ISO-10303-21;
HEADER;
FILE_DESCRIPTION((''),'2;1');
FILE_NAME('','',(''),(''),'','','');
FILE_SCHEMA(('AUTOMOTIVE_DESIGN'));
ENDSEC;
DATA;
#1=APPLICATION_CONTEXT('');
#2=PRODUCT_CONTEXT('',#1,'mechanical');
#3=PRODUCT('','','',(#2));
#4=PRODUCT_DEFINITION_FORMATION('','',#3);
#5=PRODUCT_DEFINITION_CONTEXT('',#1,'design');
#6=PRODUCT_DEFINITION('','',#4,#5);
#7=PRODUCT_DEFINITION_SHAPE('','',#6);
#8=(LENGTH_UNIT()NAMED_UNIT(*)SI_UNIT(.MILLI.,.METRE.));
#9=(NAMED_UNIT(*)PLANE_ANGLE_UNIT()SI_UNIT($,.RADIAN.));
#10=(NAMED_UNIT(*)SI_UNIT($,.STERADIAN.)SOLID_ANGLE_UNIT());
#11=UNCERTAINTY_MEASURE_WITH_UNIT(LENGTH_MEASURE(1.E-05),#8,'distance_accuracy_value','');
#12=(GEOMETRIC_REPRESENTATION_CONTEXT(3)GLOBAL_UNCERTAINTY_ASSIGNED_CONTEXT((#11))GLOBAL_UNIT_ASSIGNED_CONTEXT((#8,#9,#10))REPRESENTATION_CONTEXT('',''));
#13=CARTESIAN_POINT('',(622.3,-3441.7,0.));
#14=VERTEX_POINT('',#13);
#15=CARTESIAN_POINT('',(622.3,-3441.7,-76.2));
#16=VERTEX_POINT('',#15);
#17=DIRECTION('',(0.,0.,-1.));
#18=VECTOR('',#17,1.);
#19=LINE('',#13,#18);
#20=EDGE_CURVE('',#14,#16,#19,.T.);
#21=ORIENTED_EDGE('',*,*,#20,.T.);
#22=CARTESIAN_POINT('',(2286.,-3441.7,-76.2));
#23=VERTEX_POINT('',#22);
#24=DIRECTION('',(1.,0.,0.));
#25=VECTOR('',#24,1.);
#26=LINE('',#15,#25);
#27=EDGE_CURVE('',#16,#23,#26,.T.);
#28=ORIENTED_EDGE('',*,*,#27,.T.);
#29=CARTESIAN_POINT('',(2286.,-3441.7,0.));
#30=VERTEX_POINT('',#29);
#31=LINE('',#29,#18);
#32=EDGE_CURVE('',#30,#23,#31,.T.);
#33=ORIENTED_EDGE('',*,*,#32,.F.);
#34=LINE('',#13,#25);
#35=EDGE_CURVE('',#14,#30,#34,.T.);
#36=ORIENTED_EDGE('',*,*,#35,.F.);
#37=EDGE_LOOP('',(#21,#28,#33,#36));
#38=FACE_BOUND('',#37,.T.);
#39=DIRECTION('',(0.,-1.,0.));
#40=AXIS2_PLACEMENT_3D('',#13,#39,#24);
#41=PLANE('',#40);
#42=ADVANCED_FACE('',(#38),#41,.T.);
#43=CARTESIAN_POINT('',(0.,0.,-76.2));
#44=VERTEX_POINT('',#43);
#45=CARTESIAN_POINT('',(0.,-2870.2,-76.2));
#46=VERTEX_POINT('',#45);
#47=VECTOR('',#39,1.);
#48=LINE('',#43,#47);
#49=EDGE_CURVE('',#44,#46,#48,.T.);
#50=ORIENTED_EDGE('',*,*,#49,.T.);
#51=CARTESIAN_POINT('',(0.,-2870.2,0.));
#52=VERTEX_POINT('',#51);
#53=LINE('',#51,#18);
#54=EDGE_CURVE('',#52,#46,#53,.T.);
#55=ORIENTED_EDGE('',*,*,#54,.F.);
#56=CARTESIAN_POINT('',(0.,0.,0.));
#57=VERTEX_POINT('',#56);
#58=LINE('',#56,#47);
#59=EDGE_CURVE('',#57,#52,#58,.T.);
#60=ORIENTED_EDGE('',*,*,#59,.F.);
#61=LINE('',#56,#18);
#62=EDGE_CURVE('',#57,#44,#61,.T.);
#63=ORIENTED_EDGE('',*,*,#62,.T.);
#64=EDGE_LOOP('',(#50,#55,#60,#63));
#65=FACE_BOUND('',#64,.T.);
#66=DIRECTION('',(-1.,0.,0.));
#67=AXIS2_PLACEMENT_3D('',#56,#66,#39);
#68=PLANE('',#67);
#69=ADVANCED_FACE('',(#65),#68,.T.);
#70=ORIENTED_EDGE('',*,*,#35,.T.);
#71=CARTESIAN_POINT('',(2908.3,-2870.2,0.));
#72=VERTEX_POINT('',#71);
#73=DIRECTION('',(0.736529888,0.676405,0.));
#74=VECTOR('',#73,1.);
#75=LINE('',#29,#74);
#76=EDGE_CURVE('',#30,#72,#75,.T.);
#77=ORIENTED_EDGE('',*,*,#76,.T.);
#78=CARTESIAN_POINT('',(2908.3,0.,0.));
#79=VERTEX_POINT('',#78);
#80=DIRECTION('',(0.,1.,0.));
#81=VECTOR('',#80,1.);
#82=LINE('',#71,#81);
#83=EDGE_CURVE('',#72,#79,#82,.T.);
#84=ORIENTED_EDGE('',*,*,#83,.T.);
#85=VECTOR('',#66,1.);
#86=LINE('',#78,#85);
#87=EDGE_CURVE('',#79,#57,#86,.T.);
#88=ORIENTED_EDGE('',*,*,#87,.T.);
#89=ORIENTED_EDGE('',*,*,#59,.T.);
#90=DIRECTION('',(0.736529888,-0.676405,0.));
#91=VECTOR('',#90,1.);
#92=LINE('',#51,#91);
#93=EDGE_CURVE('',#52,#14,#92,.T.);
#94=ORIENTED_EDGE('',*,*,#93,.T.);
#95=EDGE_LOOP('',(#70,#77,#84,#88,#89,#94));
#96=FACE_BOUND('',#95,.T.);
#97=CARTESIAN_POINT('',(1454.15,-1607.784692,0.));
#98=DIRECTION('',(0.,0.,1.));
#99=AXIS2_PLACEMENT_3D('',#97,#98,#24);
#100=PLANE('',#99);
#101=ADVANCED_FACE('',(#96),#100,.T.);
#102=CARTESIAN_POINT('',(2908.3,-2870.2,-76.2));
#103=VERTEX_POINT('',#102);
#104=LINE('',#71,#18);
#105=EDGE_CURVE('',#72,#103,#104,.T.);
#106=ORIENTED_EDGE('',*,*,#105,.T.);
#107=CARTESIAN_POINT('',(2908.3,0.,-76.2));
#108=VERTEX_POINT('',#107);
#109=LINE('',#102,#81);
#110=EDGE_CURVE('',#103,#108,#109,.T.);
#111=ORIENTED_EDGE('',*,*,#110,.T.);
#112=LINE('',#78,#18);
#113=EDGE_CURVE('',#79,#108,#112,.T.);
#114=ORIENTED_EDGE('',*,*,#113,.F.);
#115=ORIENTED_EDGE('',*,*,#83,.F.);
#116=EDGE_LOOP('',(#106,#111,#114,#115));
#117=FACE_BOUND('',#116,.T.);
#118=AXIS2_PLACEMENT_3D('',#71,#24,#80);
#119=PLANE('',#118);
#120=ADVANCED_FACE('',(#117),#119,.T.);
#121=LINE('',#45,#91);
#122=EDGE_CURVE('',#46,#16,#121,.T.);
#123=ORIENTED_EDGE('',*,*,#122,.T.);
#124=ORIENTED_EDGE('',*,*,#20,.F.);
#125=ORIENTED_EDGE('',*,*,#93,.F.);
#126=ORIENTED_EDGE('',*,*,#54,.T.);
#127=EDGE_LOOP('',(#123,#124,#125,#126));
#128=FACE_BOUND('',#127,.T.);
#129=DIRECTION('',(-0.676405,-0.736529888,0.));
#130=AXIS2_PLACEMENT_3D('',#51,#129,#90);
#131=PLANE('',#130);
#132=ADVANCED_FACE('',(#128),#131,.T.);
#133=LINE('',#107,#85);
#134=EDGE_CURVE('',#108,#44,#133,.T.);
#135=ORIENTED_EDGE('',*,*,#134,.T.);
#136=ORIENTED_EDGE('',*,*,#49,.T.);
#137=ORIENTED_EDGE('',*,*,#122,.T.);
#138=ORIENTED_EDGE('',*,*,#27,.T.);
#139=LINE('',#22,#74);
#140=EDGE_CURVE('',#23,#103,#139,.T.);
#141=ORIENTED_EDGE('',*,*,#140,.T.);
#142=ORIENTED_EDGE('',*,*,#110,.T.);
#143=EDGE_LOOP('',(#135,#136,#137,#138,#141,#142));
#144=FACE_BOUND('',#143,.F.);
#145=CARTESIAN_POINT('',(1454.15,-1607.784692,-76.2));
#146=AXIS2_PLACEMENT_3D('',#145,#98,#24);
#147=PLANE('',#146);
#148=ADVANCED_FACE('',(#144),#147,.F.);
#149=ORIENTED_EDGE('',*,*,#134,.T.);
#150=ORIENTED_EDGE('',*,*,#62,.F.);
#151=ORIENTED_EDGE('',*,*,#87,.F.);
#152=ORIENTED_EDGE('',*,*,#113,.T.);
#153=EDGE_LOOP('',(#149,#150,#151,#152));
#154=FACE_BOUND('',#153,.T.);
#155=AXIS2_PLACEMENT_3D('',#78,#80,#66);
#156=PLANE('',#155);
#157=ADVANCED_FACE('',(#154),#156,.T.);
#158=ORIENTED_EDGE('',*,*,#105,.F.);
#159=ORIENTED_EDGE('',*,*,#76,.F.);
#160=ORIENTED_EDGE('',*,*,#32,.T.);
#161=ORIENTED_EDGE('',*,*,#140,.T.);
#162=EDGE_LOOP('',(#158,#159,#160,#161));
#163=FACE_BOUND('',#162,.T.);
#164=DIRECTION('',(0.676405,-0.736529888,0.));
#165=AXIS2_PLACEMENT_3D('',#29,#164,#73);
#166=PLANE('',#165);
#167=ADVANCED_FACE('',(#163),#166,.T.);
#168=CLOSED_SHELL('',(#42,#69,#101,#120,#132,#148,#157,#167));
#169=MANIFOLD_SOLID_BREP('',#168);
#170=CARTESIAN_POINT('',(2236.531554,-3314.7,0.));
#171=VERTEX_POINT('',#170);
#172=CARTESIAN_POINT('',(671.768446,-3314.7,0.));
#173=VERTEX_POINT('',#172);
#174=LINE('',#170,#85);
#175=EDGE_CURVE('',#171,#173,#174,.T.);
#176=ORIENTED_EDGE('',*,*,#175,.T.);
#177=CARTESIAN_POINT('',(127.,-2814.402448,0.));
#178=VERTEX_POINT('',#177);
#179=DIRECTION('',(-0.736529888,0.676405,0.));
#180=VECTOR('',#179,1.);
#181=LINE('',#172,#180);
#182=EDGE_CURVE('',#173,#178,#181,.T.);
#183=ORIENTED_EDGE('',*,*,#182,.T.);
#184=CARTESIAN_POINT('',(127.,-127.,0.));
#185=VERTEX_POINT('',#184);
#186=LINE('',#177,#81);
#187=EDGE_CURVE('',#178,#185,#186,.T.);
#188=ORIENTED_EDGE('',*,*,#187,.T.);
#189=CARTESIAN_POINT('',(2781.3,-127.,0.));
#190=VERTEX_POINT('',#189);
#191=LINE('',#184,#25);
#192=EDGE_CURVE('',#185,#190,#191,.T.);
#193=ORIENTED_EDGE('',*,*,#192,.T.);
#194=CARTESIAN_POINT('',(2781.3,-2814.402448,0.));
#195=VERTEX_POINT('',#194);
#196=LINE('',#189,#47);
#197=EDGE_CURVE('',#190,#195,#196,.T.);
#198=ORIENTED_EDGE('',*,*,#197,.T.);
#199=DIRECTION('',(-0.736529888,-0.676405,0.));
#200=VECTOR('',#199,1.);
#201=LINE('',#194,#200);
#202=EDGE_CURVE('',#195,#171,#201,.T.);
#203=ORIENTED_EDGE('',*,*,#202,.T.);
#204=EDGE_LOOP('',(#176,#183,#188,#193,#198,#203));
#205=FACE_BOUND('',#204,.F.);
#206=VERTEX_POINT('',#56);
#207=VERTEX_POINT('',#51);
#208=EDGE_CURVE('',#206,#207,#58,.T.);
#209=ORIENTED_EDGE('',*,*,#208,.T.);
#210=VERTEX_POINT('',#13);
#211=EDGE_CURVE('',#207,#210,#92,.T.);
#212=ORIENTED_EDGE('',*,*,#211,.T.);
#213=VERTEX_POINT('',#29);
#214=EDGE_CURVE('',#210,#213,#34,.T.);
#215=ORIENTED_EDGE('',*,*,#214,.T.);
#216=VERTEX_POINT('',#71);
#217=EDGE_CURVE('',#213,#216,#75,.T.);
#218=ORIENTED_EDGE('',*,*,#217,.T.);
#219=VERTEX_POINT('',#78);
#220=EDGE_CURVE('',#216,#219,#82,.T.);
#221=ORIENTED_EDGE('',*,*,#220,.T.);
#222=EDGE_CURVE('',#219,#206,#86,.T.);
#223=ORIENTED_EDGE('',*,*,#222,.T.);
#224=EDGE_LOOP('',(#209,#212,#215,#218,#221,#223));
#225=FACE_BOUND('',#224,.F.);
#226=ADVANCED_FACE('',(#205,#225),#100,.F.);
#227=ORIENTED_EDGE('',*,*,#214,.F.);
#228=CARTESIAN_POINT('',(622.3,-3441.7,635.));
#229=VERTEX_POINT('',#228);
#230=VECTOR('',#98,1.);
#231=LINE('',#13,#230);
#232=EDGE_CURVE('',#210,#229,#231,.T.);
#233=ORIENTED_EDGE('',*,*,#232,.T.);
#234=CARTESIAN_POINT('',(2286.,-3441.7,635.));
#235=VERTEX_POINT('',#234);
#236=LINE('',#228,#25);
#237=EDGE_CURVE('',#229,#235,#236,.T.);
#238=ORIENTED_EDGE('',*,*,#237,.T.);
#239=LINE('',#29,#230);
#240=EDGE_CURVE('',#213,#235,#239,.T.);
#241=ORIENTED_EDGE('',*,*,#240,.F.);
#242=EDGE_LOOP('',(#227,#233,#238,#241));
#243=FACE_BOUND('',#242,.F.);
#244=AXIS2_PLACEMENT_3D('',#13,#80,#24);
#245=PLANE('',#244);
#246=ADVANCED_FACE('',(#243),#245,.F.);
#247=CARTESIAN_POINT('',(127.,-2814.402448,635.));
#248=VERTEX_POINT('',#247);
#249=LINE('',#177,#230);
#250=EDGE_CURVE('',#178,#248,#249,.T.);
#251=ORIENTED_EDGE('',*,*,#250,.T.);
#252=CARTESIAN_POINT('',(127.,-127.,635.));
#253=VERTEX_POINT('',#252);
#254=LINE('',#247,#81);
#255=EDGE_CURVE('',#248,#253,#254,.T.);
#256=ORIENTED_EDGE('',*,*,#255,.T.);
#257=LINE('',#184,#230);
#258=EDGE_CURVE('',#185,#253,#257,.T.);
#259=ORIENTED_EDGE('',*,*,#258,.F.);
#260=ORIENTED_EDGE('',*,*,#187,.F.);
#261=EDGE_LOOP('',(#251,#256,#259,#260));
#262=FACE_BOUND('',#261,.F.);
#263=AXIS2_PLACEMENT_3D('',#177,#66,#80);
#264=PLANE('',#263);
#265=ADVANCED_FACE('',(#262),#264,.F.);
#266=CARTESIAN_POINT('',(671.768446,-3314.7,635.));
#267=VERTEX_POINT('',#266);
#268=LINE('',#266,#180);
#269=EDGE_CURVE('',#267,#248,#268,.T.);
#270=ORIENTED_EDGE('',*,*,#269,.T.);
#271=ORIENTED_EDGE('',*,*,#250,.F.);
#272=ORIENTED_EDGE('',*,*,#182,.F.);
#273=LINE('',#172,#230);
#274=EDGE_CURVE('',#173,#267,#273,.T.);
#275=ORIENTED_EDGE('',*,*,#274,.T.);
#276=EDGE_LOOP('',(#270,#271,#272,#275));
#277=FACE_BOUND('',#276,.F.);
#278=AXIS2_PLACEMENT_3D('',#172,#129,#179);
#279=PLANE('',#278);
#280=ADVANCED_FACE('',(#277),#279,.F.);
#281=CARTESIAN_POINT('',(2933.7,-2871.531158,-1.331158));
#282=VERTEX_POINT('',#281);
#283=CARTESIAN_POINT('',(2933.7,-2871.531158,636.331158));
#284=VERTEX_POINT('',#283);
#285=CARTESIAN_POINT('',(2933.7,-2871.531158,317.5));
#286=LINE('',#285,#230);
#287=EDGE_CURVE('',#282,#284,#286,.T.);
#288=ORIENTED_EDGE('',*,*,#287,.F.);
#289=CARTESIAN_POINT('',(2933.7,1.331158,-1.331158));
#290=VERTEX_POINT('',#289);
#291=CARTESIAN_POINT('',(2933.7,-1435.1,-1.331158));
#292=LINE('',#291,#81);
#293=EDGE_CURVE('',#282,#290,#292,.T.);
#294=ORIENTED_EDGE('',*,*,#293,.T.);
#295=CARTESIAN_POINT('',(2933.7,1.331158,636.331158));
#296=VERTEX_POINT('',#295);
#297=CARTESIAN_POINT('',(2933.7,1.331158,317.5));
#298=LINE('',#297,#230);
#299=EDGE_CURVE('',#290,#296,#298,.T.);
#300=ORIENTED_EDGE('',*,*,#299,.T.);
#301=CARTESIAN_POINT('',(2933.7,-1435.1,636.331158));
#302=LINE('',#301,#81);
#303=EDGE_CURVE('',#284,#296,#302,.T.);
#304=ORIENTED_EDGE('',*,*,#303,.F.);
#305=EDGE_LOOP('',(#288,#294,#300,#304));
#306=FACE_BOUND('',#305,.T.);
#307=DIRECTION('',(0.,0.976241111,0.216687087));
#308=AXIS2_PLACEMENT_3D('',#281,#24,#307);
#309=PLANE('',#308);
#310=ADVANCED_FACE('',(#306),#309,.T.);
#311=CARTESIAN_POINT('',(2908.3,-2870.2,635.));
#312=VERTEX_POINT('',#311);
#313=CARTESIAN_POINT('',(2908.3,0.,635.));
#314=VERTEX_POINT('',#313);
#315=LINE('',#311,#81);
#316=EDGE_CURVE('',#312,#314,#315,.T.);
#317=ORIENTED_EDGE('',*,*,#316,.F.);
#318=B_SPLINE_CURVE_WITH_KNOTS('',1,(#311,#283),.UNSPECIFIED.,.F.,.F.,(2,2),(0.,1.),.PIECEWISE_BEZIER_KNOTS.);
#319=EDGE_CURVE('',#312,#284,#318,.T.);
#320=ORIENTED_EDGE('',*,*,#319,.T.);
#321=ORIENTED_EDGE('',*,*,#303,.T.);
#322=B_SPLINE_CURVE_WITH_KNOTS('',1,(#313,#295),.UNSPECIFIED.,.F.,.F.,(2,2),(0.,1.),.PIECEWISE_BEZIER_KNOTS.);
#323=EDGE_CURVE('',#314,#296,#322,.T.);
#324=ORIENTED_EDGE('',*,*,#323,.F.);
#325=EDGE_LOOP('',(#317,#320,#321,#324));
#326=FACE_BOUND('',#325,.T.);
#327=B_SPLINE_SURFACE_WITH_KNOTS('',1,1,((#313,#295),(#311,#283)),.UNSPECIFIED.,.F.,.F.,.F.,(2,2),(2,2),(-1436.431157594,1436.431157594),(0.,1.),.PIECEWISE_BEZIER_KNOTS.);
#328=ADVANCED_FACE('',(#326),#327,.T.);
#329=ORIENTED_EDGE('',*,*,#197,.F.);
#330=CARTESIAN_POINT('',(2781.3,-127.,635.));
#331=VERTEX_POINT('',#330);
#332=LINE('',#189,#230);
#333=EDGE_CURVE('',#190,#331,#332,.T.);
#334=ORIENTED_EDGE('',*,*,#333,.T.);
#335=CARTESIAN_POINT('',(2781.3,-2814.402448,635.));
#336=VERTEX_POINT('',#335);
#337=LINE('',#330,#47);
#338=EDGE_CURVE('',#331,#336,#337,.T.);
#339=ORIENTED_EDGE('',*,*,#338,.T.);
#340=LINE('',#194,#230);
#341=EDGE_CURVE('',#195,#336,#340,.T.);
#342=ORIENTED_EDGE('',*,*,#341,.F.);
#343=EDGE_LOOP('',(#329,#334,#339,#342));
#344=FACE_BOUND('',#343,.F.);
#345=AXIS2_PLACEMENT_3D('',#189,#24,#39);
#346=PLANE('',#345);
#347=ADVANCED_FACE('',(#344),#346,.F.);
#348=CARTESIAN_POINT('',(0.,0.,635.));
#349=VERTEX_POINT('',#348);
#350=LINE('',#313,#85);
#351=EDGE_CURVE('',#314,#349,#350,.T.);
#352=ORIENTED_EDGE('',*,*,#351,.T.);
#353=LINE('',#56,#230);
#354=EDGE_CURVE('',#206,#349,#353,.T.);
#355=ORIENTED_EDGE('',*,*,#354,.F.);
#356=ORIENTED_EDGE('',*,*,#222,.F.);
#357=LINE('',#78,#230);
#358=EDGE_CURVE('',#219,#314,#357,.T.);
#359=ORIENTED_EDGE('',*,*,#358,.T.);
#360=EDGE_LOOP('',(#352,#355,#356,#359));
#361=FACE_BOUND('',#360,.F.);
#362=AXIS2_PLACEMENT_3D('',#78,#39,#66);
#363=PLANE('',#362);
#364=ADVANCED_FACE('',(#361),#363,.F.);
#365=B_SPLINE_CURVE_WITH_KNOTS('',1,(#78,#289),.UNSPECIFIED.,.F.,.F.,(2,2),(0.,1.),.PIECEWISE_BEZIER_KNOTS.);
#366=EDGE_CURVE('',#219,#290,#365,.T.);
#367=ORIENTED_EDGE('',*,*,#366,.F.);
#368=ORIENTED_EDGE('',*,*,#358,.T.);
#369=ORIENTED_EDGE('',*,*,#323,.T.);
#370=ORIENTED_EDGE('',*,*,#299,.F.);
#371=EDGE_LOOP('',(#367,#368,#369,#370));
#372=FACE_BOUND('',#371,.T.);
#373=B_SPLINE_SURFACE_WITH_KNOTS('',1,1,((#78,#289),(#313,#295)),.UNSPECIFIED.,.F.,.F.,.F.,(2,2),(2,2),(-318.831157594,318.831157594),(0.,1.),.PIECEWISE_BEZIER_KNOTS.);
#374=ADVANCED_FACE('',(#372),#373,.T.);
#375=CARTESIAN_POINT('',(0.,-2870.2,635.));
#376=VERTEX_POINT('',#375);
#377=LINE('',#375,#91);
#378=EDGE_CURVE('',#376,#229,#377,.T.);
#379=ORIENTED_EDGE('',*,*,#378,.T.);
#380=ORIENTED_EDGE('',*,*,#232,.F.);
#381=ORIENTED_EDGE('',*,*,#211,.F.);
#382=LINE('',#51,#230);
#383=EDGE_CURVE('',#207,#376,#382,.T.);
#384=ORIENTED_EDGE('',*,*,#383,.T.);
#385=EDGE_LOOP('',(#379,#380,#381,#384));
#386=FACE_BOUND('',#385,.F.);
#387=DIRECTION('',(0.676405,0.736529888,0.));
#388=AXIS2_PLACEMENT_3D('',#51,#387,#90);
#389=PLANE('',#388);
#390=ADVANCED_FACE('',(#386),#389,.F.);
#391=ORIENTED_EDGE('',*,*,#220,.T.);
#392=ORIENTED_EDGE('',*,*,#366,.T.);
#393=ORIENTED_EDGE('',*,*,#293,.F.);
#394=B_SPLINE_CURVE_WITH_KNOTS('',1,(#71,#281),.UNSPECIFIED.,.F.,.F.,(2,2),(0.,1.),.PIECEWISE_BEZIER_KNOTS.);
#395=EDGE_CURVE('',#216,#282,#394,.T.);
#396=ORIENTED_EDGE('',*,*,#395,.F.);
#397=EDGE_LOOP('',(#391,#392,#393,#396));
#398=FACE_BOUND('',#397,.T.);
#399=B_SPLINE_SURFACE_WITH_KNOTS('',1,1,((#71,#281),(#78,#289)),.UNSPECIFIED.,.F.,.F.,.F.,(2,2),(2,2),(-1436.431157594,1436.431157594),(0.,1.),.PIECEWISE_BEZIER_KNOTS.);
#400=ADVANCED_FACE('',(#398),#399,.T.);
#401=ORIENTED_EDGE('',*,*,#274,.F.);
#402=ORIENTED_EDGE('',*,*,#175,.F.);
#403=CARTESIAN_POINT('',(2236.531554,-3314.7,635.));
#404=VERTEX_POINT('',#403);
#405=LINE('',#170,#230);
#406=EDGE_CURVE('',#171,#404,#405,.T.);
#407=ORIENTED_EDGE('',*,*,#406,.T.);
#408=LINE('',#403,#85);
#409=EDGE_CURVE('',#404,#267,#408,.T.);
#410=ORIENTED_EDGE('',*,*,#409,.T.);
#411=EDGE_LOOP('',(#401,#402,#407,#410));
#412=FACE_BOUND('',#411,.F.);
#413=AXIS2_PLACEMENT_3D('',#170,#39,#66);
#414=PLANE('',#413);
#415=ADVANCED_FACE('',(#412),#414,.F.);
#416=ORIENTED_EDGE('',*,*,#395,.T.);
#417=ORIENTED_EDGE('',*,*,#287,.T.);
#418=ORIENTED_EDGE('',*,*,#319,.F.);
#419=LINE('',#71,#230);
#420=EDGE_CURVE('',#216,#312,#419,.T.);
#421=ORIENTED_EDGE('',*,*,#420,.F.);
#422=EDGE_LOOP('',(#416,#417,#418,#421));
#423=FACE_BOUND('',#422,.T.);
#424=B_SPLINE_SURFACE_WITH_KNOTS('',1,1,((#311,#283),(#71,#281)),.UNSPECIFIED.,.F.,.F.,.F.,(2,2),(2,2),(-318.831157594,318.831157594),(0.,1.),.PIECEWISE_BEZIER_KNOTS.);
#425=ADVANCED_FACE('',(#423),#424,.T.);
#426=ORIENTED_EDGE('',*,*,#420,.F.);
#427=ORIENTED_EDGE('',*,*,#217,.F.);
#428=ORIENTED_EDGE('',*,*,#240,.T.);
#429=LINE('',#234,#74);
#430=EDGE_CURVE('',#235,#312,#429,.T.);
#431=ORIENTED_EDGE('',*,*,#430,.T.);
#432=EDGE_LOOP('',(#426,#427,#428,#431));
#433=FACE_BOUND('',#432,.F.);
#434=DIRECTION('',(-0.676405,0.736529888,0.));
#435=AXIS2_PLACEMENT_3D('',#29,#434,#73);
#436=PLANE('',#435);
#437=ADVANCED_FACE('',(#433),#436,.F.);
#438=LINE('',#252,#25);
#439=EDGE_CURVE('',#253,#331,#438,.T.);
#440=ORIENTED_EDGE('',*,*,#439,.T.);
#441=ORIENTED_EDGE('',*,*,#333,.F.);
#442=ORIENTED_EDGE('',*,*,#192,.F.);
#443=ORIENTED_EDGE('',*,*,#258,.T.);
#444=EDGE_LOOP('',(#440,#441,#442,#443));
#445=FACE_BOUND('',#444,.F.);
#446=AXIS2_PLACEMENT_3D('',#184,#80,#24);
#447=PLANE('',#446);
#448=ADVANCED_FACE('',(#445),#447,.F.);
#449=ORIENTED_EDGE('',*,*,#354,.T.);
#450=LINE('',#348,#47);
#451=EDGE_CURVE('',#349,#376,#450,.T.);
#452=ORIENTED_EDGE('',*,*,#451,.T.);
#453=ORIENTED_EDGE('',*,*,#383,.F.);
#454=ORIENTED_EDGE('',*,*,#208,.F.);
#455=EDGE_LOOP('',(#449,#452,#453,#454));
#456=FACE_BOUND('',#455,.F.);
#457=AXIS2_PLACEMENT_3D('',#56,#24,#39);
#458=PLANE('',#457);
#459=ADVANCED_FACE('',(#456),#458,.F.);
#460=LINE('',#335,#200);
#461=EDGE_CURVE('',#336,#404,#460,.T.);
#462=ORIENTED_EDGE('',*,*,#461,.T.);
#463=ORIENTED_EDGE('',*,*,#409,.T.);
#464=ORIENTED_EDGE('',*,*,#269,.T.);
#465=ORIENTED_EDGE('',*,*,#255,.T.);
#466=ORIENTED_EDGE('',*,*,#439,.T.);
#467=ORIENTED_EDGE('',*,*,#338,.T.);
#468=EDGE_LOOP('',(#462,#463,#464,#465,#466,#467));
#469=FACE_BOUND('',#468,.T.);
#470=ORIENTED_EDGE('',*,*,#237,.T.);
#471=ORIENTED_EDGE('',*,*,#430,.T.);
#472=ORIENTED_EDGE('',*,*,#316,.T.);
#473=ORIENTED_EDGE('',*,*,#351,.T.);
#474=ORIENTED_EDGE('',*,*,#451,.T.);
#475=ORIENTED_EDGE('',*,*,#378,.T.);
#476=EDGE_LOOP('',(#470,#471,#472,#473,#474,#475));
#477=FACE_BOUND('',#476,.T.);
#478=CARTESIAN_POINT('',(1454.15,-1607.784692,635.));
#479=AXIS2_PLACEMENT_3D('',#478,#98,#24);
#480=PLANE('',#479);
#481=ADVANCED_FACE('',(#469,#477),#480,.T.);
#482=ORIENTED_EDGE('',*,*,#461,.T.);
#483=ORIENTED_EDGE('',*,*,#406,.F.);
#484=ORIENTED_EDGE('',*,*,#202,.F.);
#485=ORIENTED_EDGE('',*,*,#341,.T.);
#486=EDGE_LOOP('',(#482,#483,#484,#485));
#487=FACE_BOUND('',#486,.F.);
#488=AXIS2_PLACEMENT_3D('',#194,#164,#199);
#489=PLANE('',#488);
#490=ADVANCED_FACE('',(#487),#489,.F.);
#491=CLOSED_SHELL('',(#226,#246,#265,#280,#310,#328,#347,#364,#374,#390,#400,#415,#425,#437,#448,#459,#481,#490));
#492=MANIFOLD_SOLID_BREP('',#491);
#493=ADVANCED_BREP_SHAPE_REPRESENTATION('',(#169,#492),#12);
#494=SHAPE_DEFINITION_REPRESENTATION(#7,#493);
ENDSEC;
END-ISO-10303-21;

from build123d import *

# Parameters (mm, degrees)
F1_DEPTH  = 76.2
F2_DEPTH  = 635
F2_FACE_W = 2870.2
F2_FACE_H = 635
F3_DEPTH  = 25.4
F3_TAPER  = -3


with BuildPart() as f1:
    # F0 (on Top) → F1 (new body)
    with BuildSketch(Plane.XY):
        Polygon((2908.3, 0), (0, 0), (0, -2870.2), (622.3, -3441.7), (2286, -3441.7), (2908.3, -2870.2), align=None)
        Polygon((671.7684459615, -3314.7), (127, -2814.4024475864), (127, -127), (2781.3, -127), (2781.3, -2814.4024475864), (2236.5315540385, -3314.7), align=None, mode=Mode.SUBTRACT)
        Polygon((127, -127), (127, -2814.4024475864), (671.7684459615, -3314.7), (2236.5315540385, -3314.7), (2781.3, -2814.4024475864), (2781.3, -127), align=None)
    extrude(amount=-F1_DEPTH)


with BuildPart() as f2:
    # F0 (on Top) → F2 (new body)
    with BuildSketch(Plane.XY):
        Polygon((2908.3, 0), (0, 0), (0, -2870.2), (622.3, -3441.7), (2286, -3441.7), (2908.3, -2870.2), align=None)
        Polygon((671.7684459615, -3314.7), (127, -2814.4024475864), (127, -127), (2781.3, -127), (2781.3, -2814.4024475864), (2236.5315540385, -3314.7), align=None, mode=Mode.SUBTRACT)
    extrude(amount=F2_DEPTH)

    # F2_face (on face) → F3 (join)
    with BuildSketch(Plane(origin=(2908.3, -1435.1, 317.5), x_dir=(0, 1, 0), z_dir=(1, 0, 0))):
        Rectangle(F2_FACE_W, F2_FACE_H)
    extrude(amount=F3_DEPTH, taper=F3_TAPER)


solid = Compound([f1.part, f2.part])
